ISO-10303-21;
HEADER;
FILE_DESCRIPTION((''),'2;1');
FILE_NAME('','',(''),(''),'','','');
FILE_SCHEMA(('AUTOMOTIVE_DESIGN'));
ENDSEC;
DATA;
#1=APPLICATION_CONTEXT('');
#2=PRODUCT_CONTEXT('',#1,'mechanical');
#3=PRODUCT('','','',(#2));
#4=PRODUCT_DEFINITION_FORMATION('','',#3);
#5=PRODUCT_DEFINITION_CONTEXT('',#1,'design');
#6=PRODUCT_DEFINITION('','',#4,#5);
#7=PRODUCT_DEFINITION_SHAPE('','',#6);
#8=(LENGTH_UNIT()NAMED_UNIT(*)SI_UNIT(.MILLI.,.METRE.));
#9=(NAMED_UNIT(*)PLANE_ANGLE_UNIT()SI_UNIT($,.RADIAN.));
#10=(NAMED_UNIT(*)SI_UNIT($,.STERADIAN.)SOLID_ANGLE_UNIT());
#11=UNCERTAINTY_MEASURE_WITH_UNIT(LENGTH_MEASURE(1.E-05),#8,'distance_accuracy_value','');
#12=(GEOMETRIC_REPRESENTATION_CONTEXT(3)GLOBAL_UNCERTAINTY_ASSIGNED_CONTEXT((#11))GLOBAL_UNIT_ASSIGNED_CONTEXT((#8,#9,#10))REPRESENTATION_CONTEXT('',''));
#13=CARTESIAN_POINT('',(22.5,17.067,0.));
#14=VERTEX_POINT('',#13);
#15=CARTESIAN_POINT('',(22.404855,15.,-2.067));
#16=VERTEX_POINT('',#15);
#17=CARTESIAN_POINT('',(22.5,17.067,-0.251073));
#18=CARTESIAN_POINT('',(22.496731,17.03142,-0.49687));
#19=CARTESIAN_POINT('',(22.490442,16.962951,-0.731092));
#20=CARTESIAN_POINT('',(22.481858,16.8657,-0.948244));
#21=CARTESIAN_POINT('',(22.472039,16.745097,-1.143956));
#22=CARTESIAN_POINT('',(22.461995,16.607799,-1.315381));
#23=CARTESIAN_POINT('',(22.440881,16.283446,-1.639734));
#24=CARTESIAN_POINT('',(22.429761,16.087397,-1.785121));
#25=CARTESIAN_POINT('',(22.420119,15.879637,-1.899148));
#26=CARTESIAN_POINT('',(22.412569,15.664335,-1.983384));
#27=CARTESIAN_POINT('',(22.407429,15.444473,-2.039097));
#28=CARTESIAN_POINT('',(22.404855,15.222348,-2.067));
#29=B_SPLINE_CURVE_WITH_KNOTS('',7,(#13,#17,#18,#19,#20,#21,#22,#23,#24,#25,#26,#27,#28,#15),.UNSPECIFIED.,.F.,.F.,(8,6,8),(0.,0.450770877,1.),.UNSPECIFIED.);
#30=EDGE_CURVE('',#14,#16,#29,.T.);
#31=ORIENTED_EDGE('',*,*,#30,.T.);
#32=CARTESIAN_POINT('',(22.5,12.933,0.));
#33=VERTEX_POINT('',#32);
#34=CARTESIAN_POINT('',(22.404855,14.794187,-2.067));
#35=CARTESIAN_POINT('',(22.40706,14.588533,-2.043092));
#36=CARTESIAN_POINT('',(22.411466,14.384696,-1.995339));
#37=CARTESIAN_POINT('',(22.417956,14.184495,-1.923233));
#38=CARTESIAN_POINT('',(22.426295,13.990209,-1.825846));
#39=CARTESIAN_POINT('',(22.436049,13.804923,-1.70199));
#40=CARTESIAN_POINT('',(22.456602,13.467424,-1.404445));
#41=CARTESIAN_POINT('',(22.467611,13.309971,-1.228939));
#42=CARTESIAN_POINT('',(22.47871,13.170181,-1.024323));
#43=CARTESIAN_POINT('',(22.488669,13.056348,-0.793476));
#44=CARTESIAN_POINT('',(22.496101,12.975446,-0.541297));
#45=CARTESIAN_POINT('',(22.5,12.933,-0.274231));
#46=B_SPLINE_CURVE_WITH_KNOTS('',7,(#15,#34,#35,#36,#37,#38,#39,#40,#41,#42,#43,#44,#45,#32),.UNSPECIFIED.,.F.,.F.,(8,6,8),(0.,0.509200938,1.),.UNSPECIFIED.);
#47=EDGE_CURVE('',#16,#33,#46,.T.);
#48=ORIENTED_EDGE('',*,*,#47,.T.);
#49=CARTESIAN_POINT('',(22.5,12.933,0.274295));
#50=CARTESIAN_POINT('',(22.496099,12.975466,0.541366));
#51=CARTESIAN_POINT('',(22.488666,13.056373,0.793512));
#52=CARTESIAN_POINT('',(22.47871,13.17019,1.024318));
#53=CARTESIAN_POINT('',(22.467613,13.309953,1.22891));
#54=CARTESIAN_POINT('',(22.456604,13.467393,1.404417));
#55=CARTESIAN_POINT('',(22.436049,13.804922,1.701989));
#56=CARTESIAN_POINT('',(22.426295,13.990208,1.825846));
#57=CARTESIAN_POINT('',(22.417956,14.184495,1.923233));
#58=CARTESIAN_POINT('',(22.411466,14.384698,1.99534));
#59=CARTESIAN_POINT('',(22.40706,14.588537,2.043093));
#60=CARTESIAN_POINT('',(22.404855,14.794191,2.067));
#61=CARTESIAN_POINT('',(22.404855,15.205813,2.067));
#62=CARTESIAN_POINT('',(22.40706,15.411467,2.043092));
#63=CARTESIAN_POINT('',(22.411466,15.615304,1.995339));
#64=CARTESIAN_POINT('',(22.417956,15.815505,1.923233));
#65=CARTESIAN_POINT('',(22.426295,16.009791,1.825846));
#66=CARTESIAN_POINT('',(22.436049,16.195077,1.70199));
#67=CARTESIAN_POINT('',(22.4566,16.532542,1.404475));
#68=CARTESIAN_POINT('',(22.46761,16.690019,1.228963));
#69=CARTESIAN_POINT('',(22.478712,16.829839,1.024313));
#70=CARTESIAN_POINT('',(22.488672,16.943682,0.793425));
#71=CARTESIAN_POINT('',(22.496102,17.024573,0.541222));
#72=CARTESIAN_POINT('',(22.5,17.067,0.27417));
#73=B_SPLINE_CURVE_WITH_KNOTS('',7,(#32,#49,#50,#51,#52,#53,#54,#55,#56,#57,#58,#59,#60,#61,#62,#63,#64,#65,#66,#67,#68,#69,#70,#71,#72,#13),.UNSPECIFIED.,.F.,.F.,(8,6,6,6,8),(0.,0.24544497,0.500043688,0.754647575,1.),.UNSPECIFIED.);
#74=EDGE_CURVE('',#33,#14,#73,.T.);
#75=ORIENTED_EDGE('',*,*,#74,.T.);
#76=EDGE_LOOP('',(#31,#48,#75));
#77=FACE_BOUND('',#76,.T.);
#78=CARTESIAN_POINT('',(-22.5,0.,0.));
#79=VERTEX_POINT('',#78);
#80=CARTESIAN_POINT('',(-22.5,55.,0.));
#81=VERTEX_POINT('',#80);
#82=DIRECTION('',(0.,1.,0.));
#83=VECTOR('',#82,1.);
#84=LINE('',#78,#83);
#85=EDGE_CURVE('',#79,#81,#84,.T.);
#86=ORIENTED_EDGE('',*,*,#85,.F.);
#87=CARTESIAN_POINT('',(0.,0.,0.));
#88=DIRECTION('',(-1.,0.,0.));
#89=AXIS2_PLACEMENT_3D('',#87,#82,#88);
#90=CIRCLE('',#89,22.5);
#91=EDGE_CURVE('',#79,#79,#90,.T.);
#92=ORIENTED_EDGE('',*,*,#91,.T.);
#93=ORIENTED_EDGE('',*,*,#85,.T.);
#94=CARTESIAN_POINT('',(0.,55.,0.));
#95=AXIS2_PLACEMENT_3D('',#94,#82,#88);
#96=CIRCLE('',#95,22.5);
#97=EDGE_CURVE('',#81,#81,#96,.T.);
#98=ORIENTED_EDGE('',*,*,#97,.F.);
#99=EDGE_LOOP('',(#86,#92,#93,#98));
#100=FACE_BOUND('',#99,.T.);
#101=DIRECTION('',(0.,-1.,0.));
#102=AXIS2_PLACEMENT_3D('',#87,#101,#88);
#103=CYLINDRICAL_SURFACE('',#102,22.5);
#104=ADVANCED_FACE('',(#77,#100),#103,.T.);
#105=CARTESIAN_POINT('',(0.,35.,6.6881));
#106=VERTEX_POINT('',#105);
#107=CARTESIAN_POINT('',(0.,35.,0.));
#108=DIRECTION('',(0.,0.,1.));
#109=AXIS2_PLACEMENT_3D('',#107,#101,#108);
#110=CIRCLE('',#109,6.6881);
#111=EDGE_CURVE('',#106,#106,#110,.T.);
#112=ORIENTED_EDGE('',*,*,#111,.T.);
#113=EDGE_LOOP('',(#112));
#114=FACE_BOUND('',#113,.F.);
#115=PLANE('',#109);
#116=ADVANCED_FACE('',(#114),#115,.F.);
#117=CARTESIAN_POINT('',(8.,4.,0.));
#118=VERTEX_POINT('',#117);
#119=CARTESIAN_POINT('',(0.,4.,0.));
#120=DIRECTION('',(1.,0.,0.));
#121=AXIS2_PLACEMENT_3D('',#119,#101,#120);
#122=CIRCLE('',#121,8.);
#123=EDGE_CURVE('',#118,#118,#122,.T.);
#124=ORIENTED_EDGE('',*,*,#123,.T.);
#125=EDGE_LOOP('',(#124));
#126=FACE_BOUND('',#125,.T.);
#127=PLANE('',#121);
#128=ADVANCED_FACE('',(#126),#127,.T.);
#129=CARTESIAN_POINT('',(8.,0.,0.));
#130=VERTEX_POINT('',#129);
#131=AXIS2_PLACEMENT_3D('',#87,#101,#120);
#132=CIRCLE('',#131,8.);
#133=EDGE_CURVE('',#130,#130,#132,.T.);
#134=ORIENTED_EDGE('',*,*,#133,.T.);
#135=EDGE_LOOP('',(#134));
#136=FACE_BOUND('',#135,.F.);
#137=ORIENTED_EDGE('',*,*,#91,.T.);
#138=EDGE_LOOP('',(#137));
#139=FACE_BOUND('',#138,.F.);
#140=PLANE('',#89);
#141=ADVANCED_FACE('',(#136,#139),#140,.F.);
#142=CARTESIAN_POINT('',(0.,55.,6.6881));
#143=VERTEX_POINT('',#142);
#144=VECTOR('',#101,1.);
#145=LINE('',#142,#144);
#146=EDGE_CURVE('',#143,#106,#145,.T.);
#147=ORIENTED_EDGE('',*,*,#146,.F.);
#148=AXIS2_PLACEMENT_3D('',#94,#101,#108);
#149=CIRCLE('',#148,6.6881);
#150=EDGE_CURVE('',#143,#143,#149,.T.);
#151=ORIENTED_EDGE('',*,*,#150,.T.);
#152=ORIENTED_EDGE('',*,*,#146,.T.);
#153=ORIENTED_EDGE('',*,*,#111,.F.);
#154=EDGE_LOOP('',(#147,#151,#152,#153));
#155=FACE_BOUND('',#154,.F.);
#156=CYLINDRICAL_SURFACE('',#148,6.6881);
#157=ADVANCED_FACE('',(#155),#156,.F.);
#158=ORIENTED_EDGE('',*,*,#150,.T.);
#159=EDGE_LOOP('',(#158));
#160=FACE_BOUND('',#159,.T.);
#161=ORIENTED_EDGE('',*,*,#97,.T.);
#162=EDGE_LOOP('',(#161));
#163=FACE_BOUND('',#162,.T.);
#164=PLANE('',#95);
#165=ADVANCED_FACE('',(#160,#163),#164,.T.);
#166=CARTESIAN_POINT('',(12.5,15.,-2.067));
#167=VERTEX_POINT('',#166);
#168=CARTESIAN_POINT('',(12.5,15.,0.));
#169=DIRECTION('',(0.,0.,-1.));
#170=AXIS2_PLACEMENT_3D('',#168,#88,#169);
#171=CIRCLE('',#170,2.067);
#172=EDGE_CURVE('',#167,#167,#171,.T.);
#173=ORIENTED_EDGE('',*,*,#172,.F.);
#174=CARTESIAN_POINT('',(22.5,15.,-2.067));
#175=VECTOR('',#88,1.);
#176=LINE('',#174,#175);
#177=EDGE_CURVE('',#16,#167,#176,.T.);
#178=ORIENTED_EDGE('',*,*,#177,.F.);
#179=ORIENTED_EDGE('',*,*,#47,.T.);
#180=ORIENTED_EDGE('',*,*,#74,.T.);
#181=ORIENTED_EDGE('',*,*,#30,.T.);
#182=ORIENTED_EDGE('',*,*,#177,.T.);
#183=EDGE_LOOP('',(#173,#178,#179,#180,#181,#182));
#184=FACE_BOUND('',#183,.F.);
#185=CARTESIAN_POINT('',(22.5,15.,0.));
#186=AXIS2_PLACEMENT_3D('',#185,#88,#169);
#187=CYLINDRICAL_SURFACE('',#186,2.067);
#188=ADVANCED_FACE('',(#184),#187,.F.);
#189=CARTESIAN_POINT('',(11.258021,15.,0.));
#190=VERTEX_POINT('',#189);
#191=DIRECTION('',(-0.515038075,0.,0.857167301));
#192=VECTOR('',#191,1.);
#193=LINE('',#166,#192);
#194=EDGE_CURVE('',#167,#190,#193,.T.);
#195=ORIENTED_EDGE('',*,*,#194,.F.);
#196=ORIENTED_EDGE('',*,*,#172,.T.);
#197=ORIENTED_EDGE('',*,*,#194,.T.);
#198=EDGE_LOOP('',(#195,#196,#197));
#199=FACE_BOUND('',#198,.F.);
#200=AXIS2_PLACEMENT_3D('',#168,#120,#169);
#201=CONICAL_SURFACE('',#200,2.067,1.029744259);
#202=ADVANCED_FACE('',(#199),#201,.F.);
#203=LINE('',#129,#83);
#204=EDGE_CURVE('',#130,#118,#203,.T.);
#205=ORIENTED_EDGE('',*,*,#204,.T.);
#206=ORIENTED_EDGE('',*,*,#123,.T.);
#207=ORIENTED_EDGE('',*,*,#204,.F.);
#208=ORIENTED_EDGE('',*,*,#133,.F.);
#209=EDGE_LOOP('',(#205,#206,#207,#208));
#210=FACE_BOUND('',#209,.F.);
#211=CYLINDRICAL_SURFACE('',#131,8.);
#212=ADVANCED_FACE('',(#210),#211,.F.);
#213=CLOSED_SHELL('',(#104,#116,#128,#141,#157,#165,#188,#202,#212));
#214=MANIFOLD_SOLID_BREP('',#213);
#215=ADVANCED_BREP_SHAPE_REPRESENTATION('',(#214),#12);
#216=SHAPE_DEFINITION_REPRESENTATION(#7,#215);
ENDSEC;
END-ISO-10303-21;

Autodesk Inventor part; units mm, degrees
ref_plane "YZ Plane" through (0, 0, 0) normal (1, 0, 0) x (0, 1, 0)
ref_plane "XZ Plane" through (0, 0, 0) normal (0, 1, 0) x (-1, 0, 0)
sketch "Эскиз1" plane through (0, 0, 0) normal (0, 1, 0) x (-1, 0, 0)
  circle A0 centre (0, 0) radius 22.5
  dimension "d0" = 45
extrude "Выдавливание1" add sketch "Эскиз1" along normal blind 55
sketch "Эскиз2" plane through (0, 0, 0) normal (0, -1, 0) x (1, 0, 0)
  circle A0 centre (0, 0) radius 22.5 projected
  point P0 (22.5, 0)
ref_plane "РабПлоскость1" through (22.5, 0, 0) normal (1, 0, 0) x (0, 1, 0)
sketch "Эскиз3" plane through (22.5, 0, 0) normal (1, 0, 0) x (0, 1, 0)
  line L0 (0, 0) -> (12.5, 0)
  line L1 (12.5, 0) -> (17.5, 0)
  circle A0 centre (15, 0) radius 2.5
  dimension "d3" = 12.5
  dimension "d4" = 5
hole "Отверстие1" at (22.5, 15, 0) direction (-1, 0, 0) diameter 4.134 depth 10 tip angle 118 thread size "M5x0.8" class "6H" standard "ISO Metric profile"
sketch "Эскиз4" plane through (0, 55, 0) normal (0, 1, 0) x (1, 0, 0)
  point P0 (0, 0)
  point P1 (0, 0)
hole "Отверстие2" at (0, 55, 0) direction (0, -1, 0) diameter 13.3762 depth 20 thread size "M15x1.5" class "6H" standard "ISO Metric profile"
sketch "Эскиз5" plane through (0, 0, 0) normal (0, -1, 0) x (1, 0, 0)
  circle A0 centre (0, 0) radius 8
  dimension "d27" = 16
extrude "Выдавливание2" cut sketch "Эскиз5" against normal blind 4
properties part number "Маховик"
